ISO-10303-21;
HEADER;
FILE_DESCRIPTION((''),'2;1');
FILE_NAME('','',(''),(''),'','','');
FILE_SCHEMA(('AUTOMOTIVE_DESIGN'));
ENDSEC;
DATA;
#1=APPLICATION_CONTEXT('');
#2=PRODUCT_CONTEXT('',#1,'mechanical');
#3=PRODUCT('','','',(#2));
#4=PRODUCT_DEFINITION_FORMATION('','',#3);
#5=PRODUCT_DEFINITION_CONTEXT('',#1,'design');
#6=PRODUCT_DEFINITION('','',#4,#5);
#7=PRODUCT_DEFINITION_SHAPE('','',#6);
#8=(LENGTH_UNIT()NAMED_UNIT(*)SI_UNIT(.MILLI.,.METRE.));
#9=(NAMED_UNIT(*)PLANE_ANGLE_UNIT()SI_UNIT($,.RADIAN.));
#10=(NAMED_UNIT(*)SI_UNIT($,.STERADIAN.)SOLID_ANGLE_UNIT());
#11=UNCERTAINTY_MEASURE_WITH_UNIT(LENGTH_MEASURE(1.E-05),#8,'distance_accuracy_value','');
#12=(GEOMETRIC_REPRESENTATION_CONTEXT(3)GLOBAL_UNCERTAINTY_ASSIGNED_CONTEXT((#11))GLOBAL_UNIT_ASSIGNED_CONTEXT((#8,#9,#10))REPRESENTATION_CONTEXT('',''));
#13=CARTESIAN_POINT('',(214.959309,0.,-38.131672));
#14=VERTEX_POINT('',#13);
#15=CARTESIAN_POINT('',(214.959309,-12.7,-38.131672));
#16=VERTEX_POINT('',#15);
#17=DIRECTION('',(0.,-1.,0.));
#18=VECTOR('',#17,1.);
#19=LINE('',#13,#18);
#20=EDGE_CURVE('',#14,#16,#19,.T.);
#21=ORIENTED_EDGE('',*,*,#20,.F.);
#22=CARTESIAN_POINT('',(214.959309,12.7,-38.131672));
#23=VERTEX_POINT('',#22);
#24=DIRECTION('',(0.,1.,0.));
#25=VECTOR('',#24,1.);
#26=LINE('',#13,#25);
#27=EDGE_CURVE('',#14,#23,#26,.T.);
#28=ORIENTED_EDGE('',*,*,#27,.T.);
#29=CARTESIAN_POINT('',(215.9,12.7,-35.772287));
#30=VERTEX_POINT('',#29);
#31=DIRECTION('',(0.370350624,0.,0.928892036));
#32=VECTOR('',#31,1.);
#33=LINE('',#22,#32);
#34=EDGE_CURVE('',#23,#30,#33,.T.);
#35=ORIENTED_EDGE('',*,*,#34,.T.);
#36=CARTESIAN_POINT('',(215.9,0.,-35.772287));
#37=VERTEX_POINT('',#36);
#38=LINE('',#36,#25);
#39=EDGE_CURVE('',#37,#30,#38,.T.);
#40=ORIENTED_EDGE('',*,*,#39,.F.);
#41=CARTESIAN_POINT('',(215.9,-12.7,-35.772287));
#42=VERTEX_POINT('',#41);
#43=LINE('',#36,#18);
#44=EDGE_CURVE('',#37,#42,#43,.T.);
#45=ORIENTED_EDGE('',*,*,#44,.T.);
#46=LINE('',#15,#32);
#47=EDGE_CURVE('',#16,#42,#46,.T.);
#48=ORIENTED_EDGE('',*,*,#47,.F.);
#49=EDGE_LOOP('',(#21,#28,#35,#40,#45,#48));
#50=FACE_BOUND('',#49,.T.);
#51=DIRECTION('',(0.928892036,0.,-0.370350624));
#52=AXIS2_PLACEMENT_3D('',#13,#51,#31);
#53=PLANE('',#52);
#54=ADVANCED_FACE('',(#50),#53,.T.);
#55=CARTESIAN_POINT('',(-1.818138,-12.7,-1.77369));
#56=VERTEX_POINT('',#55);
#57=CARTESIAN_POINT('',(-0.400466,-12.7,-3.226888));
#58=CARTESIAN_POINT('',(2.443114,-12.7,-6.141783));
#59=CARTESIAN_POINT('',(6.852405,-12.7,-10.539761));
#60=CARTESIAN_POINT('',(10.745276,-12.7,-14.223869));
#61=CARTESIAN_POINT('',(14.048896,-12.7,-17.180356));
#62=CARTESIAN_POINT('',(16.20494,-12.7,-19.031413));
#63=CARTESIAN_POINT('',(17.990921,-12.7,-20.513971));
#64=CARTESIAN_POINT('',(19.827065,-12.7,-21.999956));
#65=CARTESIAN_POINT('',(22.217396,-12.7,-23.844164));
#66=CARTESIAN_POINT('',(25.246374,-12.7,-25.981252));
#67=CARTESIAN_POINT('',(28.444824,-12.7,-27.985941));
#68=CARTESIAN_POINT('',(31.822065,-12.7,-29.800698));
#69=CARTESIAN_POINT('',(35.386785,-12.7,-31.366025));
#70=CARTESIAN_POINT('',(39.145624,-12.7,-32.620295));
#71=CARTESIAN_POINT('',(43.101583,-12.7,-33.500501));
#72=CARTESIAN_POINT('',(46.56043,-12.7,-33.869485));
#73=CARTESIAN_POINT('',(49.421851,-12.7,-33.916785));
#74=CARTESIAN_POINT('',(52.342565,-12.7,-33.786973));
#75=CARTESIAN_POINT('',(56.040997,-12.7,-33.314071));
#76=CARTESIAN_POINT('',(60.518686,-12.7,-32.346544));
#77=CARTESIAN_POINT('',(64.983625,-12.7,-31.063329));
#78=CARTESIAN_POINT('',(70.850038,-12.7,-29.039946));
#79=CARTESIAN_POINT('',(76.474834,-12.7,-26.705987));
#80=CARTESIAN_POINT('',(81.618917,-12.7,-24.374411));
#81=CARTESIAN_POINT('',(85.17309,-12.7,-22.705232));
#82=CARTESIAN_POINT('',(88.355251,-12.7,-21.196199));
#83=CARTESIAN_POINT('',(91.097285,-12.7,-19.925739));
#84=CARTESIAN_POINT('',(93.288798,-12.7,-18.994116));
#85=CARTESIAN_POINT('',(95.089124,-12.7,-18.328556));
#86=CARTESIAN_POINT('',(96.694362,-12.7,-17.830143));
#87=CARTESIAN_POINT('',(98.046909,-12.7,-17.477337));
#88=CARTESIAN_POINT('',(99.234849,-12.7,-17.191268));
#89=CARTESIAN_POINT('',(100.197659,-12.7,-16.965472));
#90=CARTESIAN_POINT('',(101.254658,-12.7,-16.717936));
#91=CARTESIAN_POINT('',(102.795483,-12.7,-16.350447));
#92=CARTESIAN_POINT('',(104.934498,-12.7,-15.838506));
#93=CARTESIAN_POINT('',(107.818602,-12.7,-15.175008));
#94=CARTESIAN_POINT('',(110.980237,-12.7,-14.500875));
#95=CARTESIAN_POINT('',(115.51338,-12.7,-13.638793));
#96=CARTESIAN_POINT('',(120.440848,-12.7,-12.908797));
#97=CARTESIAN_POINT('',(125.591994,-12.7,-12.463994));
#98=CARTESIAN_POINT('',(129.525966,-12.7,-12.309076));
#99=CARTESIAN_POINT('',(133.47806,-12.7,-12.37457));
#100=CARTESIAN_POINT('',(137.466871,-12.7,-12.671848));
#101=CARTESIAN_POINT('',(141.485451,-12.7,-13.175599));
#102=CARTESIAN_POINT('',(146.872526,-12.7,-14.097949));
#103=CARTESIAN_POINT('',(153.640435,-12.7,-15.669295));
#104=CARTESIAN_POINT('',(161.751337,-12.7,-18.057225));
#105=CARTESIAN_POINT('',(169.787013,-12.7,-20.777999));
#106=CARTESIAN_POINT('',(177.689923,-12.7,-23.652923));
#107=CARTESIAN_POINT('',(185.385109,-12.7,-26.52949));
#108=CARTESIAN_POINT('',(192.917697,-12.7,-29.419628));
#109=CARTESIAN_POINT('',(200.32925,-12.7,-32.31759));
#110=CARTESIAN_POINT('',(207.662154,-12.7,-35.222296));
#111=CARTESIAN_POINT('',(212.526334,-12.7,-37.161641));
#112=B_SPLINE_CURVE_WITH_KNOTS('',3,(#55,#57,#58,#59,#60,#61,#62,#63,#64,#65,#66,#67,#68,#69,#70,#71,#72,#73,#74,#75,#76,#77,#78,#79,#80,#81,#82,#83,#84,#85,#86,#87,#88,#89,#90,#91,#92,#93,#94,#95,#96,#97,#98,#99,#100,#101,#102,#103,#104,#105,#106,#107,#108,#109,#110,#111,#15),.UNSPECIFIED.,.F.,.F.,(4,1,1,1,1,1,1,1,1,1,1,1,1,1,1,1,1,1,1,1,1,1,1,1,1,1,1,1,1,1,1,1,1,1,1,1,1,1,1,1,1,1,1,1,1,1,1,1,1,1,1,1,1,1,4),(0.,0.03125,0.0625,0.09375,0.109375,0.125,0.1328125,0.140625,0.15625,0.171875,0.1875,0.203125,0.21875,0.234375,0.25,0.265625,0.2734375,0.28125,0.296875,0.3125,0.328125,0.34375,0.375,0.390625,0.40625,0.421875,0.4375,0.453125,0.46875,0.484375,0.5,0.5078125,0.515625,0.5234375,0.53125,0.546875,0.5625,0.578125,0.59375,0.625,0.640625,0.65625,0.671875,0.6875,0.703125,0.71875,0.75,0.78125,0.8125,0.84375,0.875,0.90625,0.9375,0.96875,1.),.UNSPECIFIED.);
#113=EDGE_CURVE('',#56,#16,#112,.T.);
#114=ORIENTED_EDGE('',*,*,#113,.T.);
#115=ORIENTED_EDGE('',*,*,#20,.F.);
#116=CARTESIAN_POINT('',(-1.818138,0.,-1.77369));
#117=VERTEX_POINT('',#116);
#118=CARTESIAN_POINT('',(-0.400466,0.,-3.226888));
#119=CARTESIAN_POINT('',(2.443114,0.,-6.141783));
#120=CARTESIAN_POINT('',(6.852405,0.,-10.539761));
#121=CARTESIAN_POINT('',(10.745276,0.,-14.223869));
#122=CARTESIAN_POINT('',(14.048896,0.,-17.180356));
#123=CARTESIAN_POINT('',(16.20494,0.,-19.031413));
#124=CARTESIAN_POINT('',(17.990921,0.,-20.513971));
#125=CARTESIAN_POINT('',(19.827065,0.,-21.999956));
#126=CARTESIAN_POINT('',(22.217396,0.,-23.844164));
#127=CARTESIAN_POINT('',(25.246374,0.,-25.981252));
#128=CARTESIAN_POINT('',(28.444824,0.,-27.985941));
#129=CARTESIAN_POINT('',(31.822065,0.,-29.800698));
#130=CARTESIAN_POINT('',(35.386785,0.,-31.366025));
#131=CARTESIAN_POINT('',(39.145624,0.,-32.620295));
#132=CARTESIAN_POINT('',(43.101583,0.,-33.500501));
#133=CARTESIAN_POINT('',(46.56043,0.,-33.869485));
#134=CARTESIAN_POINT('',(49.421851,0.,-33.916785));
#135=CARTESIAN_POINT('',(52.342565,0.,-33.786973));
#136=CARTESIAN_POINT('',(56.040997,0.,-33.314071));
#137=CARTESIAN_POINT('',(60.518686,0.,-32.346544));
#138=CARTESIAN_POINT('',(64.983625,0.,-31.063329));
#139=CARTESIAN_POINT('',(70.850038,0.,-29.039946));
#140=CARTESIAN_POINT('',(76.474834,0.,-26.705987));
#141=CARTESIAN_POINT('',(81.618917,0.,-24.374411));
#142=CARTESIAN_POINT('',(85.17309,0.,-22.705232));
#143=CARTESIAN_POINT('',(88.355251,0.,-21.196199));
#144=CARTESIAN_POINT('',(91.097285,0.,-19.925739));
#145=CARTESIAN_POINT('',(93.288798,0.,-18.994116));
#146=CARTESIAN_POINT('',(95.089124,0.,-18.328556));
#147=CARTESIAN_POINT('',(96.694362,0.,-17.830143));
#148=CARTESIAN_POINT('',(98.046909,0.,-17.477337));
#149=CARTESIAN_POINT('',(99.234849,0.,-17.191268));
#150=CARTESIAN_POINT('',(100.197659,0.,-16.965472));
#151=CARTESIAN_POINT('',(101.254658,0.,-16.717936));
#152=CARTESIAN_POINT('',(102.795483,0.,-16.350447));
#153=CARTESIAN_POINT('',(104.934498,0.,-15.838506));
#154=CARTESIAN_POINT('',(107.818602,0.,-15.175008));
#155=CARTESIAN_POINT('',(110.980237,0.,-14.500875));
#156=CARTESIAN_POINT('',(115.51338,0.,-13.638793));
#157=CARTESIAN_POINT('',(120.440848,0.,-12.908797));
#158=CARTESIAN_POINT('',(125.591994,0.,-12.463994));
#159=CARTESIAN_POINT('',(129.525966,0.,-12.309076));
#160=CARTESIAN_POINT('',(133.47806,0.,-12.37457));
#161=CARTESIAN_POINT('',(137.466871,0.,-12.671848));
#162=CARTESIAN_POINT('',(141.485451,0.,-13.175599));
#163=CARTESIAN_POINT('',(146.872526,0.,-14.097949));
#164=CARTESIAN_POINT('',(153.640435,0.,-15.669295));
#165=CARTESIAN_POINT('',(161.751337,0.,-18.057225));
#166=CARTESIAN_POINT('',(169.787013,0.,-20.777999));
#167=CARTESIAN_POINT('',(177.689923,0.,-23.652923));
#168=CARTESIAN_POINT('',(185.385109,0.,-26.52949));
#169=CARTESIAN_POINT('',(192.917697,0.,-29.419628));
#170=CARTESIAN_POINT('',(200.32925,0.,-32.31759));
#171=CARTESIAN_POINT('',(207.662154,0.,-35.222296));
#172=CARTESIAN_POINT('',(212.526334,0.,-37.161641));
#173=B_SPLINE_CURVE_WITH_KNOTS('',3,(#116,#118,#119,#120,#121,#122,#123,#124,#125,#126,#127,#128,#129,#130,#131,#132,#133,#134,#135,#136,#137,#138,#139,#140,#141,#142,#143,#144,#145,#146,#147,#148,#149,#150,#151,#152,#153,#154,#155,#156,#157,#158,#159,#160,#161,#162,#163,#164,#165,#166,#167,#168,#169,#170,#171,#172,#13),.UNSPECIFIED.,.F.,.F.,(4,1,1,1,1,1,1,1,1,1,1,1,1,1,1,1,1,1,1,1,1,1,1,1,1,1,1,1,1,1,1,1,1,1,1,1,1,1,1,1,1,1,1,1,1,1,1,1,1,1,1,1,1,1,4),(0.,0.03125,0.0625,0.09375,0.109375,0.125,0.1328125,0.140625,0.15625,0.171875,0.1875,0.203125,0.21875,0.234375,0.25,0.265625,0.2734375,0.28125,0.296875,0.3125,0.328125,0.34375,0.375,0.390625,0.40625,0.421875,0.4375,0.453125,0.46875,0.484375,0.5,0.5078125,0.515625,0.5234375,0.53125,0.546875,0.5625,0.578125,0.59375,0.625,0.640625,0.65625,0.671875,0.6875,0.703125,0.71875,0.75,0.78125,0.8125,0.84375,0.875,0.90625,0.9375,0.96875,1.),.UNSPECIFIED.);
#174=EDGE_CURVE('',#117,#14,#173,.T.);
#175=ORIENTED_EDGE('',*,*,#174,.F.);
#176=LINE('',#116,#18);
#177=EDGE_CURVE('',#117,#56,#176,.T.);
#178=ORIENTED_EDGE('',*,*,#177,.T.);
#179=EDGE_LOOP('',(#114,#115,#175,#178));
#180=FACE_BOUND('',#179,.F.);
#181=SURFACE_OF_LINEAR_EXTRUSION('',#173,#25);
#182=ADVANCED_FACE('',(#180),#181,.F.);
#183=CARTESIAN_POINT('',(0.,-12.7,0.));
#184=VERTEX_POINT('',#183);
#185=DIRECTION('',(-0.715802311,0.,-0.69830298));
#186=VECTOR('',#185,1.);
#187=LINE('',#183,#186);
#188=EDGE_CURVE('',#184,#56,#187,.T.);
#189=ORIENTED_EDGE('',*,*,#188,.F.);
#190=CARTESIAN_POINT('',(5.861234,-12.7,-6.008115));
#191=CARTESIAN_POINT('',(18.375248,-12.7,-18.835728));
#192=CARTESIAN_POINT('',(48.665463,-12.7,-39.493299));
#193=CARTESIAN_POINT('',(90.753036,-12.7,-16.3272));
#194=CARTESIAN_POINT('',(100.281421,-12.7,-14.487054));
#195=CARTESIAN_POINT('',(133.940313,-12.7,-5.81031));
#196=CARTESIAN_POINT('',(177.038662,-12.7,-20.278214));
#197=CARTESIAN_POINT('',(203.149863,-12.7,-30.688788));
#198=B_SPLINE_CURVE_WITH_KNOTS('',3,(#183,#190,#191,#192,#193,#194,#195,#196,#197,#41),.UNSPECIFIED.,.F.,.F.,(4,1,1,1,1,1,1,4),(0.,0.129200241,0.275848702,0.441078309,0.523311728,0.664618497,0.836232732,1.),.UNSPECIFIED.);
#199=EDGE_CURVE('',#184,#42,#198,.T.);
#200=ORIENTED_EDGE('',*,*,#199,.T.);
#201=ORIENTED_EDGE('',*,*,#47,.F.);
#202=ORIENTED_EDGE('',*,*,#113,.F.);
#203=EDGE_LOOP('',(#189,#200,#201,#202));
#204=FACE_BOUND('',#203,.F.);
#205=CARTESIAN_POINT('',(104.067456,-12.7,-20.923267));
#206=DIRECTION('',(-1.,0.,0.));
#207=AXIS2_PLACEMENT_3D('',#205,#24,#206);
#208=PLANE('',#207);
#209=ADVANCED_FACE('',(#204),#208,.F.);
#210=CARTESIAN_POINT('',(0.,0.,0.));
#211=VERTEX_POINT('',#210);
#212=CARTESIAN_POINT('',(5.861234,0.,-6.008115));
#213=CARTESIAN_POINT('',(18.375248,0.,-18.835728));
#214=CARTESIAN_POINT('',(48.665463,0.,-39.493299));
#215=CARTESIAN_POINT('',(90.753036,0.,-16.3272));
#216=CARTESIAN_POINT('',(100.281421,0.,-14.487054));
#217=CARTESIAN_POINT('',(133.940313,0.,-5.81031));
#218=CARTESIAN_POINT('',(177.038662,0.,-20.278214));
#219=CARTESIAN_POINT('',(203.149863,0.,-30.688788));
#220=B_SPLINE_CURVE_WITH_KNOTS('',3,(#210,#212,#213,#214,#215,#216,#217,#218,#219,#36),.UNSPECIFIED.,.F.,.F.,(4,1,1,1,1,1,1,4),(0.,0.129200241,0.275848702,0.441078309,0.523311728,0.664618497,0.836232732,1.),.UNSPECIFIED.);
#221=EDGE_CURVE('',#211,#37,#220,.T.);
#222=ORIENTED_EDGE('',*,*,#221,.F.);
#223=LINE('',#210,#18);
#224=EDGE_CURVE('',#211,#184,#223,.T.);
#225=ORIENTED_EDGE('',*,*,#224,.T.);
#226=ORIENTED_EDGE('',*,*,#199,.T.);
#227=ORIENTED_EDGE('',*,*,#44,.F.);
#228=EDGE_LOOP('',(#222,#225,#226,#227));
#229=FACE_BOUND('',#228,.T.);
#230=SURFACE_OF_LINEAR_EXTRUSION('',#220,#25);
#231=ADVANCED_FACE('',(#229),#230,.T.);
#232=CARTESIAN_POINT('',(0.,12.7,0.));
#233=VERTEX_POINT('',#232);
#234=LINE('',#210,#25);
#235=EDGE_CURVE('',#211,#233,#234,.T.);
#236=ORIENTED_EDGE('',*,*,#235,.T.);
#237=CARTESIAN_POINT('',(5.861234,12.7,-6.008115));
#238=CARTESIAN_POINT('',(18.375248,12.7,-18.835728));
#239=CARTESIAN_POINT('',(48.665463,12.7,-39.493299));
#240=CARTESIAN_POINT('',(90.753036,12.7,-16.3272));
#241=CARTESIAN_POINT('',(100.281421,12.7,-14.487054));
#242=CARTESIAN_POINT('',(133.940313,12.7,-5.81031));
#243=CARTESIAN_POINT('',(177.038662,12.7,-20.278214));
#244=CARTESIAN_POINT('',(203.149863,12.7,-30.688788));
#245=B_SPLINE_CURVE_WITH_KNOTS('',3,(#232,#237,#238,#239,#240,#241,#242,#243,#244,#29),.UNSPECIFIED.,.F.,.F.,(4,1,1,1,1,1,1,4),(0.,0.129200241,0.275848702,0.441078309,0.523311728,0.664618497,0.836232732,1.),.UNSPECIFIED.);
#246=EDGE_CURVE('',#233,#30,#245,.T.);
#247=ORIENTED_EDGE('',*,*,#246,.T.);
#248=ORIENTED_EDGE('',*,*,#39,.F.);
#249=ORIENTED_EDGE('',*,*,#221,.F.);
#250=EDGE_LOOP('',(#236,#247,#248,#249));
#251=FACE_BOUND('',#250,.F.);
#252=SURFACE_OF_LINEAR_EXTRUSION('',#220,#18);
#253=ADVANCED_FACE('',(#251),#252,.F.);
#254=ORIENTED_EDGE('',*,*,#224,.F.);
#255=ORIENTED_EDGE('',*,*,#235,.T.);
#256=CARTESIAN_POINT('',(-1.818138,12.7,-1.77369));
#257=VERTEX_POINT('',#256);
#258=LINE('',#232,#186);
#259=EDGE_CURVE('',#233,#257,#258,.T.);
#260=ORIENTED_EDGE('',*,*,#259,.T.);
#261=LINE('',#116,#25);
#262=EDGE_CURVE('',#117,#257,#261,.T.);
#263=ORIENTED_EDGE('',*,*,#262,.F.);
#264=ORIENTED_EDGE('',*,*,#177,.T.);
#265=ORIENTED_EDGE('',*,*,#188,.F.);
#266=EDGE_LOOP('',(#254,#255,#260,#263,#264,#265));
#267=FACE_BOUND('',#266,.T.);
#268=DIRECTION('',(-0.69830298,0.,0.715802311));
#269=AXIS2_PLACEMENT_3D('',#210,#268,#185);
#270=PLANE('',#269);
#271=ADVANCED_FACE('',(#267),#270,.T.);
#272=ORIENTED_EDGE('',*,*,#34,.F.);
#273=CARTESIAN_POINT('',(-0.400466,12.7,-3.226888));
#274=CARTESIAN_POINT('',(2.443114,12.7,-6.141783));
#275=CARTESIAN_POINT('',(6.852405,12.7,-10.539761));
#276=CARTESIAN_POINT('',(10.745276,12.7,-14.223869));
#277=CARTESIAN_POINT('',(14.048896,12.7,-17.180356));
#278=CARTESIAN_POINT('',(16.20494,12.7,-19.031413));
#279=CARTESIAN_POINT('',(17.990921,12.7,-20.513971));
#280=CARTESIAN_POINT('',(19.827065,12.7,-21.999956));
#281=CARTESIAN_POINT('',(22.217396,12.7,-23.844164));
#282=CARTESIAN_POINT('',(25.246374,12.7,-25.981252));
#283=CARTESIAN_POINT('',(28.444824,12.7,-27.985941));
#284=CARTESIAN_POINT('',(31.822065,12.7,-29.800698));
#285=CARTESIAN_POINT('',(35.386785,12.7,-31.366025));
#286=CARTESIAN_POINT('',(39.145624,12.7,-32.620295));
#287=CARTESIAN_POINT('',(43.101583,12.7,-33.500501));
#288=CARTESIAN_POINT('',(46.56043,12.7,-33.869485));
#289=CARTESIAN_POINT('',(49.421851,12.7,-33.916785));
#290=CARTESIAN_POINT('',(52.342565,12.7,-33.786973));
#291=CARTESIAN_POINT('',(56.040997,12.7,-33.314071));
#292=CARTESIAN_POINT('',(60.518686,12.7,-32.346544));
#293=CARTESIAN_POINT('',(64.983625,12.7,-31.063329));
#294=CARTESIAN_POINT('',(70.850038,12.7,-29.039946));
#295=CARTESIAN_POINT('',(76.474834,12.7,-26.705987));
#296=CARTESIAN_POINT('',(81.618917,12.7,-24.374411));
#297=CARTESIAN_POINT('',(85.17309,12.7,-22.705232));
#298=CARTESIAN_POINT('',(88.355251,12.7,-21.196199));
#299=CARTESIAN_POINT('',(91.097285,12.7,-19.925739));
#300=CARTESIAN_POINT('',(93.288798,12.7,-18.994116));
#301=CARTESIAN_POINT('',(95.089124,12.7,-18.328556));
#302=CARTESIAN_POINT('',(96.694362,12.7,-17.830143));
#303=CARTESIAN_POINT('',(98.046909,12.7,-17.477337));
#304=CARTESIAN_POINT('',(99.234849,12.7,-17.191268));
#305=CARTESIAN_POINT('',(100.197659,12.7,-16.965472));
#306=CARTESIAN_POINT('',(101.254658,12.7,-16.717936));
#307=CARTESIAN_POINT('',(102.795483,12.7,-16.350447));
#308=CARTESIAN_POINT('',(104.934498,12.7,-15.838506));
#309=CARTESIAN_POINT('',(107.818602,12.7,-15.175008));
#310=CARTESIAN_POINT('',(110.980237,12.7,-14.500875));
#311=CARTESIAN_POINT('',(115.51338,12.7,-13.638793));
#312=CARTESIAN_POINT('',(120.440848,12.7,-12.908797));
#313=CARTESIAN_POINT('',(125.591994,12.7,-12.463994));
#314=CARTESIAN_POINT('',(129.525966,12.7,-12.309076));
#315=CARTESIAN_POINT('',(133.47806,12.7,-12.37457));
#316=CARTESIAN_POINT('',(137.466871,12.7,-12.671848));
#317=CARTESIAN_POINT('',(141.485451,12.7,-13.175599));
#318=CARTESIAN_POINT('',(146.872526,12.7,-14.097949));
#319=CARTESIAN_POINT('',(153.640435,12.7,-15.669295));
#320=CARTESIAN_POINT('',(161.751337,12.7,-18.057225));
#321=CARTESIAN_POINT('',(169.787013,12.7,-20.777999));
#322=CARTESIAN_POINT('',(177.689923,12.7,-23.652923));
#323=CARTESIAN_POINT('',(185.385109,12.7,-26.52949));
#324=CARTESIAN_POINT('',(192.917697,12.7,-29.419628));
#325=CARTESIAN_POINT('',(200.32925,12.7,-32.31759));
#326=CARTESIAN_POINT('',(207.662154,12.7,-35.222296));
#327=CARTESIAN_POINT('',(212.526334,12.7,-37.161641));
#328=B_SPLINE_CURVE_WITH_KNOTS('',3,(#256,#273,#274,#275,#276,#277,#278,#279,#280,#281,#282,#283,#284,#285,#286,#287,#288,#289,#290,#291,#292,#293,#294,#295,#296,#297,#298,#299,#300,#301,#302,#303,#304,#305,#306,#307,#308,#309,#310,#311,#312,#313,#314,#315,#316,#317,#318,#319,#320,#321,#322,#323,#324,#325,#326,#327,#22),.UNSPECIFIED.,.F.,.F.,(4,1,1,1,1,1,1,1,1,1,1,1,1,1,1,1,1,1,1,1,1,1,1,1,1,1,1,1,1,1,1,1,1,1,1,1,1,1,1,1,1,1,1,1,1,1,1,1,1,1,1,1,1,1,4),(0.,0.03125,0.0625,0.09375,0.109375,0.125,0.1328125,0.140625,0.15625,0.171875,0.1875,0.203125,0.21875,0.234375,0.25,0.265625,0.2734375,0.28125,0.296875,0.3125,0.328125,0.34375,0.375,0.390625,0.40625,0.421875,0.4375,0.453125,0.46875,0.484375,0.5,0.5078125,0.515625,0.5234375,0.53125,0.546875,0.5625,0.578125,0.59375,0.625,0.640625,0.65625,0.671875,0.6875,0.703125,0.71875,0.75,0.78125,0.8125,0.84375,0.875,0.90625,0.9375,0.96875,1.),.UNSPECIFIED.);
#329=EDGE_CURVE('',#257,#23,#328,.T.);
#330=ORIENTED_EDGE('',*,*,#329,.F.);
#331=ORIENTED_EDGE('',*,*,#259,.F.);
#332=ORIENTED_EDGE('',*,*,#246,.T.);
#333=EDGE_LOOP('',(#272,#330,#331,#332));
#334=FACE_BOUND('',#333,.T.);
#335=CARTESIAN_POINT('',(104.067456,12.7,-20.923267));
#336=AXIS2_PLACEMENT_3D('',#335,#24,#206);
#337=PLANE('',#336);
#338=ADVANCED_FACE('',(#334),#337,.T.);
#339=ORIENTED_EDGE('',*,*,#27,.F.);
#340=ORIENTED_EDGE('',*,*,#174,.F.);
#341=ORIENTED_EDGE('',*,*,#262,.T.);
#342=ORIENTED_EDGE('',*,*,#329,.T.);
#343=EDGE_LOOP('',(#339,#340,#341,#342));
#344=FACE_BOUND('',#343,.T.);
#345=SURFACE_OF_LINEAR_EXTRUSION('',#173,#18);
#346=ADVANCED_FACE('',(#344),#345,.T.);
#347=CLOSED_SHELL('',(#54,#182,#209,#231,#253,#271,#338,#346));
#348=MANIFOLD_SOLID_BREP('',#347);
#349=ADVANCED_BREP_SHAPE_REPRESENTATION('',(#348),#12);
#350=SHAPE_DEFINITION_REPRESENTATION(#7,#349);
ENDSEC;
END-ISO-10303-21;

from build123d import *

# Parameters (mm, degrees)
F1_DEPTH = 12.7


# Not quite as in the source:
# - the dataset's text gives a spline's control points without its knots; the knots are read off the source's solid


with BuildPart() as f1:
    # F0 (on Front) → F1 (new body, symmetric)
    with BuildSketch(Plane.XZ):
        with BuildLine():
            add(Edge.make_bspline(
                [(0, 0), (5.8612335558, -6.0081148845), (18.3752479061, -18.835727906), (48.6654628653, -39.4932987315), (90.7530364795, -16.3272004333), (100.2814212382, -14.4870542481), (133.9403129455, -5.8103101016), (177.0386623069, -20.2782140016), (203.1498632313, -30.6887883047), (215.9, -35.7722866313)],
                knots=[0, 0, 0, 0, 0.129200241, 0.2758487022, 0.4410783086, 0.5233117279, 0.6646184967, 0.8362327321, 1, 1, 1, 1], degree=3))
            Line((0, 0), (-1.8181378704, -1.7736895682))
            add(Edge.make_bspline(
                [(-1.8181378704, -1.7736895682), (-0.4004659897, -3.2268880198), (2.4431142587, -6.1417829598), (6.8524053688, -10.5397610564), (10.7452755589, -14.2238690349), (14.0488962473, -17.1803558766), (16.2049401321, -19.0314128088), (17.9909210379, -20.5139707911), (19.8270649964, -21.9999559385), (22.2173956321, -23.8441638172), (25.2463744879, -25.9812516301), (28.4448239666, -27.9859413981), (31.822064763, -29.800697673), (35.386785102, -31.3660245692), (39.1456242468, -32.6202945152), (43.1015831462, -33.5005010422), (46.5604299892, -33.8694850047), (49.4218512492, -33.9167847472), (52.3425650521, -33.7869733676), (56.0409974594, -33.3140712632), (60.5186857591, -32.3465436646), (64.9836248523, -31.0633291737), (70.8500377765, -29.0399456974), (76.4748344801, -26.7059871293), (81.6189172058, -24.3744110822), (85.1730897504, -22.7052323037), (88.3552510159, -21.1961987948), (91.0972845141, -19.9257389393), (93.2887984197, -18.9941161488), (95.0891241303, -18.328556452), (96.6943622555, -17.8301427153), (98.0469088091, -17.4773372304), (99.2348494878, -17.1912683069), (100.197658958, -16.9654717597), (101.2546580452, -16.7179356412), (102.7954830873, -16.3504470242), (104.9344979714, -15.838506122), (107.8186019956, -15.175008387), (110.9802371747, -14.5008751611), (115.5133801016, -13.638792825), (120.4408484671, -12.9087974948), (125.5919935924, -12.463994437), (129.5259656126, -12.3090764437), (133.478060473, -12.3745703184), (137.4668709198, -12.6718476795), (141.4854505796, -13.175598953), (146.8725262766, -14.0979489105), (153.6404353633, -15.6692951637), (161.751337364, -18.0572248428), (169.7870128362, -20.7779992509), (177.689922634, -23.6529231388), (185.385108931, -26.529489533), (192.9176973961, -29.4196277885), (200.3292495735, -32.3175899877), (207.6621539732, -35.2222962334), (212.5263337706, -37.1616414275), (214.9593094143, -38.1316724035)],
                knots=[0, 0, 0, 0, 0.03125, 0.0625, 0.09375, 0.109375, 0.125, 0.1328125, 0.140625, 0.15625, 0.171875, 0.1875, 0.203125, 0.21875, 0.234375, 0.25, 0.265625, 0.2734375, 0.28125, 0.296875, 0.3125, 0.328125, 0.34375, 0.375, 0.390625, 0.40625, 0.421875, 0.4375, 0.453125, 0.46875, 0.484375, 0.5, 0.5078125, 0.515625, 0.5234375, 0.53125, 0.546875, 0.5625, 0.578125, 0.59375, 0.625, 0.640625, 0.65625, 0.671875, 0.6875, 0.703125, 0.71875, 0.75, 0.78125, 0.8125, 0.84375, 0.875, 0.90625, 0.9375, 0.96875, 1, 1, 1, 1], degree=3))
            Line((214.9593094143, -38.1316724035), (215.9, -35.7722866313))
        make_face()
    extrude(amount=F1_DEPTH, both=True)


solid = f1.part
